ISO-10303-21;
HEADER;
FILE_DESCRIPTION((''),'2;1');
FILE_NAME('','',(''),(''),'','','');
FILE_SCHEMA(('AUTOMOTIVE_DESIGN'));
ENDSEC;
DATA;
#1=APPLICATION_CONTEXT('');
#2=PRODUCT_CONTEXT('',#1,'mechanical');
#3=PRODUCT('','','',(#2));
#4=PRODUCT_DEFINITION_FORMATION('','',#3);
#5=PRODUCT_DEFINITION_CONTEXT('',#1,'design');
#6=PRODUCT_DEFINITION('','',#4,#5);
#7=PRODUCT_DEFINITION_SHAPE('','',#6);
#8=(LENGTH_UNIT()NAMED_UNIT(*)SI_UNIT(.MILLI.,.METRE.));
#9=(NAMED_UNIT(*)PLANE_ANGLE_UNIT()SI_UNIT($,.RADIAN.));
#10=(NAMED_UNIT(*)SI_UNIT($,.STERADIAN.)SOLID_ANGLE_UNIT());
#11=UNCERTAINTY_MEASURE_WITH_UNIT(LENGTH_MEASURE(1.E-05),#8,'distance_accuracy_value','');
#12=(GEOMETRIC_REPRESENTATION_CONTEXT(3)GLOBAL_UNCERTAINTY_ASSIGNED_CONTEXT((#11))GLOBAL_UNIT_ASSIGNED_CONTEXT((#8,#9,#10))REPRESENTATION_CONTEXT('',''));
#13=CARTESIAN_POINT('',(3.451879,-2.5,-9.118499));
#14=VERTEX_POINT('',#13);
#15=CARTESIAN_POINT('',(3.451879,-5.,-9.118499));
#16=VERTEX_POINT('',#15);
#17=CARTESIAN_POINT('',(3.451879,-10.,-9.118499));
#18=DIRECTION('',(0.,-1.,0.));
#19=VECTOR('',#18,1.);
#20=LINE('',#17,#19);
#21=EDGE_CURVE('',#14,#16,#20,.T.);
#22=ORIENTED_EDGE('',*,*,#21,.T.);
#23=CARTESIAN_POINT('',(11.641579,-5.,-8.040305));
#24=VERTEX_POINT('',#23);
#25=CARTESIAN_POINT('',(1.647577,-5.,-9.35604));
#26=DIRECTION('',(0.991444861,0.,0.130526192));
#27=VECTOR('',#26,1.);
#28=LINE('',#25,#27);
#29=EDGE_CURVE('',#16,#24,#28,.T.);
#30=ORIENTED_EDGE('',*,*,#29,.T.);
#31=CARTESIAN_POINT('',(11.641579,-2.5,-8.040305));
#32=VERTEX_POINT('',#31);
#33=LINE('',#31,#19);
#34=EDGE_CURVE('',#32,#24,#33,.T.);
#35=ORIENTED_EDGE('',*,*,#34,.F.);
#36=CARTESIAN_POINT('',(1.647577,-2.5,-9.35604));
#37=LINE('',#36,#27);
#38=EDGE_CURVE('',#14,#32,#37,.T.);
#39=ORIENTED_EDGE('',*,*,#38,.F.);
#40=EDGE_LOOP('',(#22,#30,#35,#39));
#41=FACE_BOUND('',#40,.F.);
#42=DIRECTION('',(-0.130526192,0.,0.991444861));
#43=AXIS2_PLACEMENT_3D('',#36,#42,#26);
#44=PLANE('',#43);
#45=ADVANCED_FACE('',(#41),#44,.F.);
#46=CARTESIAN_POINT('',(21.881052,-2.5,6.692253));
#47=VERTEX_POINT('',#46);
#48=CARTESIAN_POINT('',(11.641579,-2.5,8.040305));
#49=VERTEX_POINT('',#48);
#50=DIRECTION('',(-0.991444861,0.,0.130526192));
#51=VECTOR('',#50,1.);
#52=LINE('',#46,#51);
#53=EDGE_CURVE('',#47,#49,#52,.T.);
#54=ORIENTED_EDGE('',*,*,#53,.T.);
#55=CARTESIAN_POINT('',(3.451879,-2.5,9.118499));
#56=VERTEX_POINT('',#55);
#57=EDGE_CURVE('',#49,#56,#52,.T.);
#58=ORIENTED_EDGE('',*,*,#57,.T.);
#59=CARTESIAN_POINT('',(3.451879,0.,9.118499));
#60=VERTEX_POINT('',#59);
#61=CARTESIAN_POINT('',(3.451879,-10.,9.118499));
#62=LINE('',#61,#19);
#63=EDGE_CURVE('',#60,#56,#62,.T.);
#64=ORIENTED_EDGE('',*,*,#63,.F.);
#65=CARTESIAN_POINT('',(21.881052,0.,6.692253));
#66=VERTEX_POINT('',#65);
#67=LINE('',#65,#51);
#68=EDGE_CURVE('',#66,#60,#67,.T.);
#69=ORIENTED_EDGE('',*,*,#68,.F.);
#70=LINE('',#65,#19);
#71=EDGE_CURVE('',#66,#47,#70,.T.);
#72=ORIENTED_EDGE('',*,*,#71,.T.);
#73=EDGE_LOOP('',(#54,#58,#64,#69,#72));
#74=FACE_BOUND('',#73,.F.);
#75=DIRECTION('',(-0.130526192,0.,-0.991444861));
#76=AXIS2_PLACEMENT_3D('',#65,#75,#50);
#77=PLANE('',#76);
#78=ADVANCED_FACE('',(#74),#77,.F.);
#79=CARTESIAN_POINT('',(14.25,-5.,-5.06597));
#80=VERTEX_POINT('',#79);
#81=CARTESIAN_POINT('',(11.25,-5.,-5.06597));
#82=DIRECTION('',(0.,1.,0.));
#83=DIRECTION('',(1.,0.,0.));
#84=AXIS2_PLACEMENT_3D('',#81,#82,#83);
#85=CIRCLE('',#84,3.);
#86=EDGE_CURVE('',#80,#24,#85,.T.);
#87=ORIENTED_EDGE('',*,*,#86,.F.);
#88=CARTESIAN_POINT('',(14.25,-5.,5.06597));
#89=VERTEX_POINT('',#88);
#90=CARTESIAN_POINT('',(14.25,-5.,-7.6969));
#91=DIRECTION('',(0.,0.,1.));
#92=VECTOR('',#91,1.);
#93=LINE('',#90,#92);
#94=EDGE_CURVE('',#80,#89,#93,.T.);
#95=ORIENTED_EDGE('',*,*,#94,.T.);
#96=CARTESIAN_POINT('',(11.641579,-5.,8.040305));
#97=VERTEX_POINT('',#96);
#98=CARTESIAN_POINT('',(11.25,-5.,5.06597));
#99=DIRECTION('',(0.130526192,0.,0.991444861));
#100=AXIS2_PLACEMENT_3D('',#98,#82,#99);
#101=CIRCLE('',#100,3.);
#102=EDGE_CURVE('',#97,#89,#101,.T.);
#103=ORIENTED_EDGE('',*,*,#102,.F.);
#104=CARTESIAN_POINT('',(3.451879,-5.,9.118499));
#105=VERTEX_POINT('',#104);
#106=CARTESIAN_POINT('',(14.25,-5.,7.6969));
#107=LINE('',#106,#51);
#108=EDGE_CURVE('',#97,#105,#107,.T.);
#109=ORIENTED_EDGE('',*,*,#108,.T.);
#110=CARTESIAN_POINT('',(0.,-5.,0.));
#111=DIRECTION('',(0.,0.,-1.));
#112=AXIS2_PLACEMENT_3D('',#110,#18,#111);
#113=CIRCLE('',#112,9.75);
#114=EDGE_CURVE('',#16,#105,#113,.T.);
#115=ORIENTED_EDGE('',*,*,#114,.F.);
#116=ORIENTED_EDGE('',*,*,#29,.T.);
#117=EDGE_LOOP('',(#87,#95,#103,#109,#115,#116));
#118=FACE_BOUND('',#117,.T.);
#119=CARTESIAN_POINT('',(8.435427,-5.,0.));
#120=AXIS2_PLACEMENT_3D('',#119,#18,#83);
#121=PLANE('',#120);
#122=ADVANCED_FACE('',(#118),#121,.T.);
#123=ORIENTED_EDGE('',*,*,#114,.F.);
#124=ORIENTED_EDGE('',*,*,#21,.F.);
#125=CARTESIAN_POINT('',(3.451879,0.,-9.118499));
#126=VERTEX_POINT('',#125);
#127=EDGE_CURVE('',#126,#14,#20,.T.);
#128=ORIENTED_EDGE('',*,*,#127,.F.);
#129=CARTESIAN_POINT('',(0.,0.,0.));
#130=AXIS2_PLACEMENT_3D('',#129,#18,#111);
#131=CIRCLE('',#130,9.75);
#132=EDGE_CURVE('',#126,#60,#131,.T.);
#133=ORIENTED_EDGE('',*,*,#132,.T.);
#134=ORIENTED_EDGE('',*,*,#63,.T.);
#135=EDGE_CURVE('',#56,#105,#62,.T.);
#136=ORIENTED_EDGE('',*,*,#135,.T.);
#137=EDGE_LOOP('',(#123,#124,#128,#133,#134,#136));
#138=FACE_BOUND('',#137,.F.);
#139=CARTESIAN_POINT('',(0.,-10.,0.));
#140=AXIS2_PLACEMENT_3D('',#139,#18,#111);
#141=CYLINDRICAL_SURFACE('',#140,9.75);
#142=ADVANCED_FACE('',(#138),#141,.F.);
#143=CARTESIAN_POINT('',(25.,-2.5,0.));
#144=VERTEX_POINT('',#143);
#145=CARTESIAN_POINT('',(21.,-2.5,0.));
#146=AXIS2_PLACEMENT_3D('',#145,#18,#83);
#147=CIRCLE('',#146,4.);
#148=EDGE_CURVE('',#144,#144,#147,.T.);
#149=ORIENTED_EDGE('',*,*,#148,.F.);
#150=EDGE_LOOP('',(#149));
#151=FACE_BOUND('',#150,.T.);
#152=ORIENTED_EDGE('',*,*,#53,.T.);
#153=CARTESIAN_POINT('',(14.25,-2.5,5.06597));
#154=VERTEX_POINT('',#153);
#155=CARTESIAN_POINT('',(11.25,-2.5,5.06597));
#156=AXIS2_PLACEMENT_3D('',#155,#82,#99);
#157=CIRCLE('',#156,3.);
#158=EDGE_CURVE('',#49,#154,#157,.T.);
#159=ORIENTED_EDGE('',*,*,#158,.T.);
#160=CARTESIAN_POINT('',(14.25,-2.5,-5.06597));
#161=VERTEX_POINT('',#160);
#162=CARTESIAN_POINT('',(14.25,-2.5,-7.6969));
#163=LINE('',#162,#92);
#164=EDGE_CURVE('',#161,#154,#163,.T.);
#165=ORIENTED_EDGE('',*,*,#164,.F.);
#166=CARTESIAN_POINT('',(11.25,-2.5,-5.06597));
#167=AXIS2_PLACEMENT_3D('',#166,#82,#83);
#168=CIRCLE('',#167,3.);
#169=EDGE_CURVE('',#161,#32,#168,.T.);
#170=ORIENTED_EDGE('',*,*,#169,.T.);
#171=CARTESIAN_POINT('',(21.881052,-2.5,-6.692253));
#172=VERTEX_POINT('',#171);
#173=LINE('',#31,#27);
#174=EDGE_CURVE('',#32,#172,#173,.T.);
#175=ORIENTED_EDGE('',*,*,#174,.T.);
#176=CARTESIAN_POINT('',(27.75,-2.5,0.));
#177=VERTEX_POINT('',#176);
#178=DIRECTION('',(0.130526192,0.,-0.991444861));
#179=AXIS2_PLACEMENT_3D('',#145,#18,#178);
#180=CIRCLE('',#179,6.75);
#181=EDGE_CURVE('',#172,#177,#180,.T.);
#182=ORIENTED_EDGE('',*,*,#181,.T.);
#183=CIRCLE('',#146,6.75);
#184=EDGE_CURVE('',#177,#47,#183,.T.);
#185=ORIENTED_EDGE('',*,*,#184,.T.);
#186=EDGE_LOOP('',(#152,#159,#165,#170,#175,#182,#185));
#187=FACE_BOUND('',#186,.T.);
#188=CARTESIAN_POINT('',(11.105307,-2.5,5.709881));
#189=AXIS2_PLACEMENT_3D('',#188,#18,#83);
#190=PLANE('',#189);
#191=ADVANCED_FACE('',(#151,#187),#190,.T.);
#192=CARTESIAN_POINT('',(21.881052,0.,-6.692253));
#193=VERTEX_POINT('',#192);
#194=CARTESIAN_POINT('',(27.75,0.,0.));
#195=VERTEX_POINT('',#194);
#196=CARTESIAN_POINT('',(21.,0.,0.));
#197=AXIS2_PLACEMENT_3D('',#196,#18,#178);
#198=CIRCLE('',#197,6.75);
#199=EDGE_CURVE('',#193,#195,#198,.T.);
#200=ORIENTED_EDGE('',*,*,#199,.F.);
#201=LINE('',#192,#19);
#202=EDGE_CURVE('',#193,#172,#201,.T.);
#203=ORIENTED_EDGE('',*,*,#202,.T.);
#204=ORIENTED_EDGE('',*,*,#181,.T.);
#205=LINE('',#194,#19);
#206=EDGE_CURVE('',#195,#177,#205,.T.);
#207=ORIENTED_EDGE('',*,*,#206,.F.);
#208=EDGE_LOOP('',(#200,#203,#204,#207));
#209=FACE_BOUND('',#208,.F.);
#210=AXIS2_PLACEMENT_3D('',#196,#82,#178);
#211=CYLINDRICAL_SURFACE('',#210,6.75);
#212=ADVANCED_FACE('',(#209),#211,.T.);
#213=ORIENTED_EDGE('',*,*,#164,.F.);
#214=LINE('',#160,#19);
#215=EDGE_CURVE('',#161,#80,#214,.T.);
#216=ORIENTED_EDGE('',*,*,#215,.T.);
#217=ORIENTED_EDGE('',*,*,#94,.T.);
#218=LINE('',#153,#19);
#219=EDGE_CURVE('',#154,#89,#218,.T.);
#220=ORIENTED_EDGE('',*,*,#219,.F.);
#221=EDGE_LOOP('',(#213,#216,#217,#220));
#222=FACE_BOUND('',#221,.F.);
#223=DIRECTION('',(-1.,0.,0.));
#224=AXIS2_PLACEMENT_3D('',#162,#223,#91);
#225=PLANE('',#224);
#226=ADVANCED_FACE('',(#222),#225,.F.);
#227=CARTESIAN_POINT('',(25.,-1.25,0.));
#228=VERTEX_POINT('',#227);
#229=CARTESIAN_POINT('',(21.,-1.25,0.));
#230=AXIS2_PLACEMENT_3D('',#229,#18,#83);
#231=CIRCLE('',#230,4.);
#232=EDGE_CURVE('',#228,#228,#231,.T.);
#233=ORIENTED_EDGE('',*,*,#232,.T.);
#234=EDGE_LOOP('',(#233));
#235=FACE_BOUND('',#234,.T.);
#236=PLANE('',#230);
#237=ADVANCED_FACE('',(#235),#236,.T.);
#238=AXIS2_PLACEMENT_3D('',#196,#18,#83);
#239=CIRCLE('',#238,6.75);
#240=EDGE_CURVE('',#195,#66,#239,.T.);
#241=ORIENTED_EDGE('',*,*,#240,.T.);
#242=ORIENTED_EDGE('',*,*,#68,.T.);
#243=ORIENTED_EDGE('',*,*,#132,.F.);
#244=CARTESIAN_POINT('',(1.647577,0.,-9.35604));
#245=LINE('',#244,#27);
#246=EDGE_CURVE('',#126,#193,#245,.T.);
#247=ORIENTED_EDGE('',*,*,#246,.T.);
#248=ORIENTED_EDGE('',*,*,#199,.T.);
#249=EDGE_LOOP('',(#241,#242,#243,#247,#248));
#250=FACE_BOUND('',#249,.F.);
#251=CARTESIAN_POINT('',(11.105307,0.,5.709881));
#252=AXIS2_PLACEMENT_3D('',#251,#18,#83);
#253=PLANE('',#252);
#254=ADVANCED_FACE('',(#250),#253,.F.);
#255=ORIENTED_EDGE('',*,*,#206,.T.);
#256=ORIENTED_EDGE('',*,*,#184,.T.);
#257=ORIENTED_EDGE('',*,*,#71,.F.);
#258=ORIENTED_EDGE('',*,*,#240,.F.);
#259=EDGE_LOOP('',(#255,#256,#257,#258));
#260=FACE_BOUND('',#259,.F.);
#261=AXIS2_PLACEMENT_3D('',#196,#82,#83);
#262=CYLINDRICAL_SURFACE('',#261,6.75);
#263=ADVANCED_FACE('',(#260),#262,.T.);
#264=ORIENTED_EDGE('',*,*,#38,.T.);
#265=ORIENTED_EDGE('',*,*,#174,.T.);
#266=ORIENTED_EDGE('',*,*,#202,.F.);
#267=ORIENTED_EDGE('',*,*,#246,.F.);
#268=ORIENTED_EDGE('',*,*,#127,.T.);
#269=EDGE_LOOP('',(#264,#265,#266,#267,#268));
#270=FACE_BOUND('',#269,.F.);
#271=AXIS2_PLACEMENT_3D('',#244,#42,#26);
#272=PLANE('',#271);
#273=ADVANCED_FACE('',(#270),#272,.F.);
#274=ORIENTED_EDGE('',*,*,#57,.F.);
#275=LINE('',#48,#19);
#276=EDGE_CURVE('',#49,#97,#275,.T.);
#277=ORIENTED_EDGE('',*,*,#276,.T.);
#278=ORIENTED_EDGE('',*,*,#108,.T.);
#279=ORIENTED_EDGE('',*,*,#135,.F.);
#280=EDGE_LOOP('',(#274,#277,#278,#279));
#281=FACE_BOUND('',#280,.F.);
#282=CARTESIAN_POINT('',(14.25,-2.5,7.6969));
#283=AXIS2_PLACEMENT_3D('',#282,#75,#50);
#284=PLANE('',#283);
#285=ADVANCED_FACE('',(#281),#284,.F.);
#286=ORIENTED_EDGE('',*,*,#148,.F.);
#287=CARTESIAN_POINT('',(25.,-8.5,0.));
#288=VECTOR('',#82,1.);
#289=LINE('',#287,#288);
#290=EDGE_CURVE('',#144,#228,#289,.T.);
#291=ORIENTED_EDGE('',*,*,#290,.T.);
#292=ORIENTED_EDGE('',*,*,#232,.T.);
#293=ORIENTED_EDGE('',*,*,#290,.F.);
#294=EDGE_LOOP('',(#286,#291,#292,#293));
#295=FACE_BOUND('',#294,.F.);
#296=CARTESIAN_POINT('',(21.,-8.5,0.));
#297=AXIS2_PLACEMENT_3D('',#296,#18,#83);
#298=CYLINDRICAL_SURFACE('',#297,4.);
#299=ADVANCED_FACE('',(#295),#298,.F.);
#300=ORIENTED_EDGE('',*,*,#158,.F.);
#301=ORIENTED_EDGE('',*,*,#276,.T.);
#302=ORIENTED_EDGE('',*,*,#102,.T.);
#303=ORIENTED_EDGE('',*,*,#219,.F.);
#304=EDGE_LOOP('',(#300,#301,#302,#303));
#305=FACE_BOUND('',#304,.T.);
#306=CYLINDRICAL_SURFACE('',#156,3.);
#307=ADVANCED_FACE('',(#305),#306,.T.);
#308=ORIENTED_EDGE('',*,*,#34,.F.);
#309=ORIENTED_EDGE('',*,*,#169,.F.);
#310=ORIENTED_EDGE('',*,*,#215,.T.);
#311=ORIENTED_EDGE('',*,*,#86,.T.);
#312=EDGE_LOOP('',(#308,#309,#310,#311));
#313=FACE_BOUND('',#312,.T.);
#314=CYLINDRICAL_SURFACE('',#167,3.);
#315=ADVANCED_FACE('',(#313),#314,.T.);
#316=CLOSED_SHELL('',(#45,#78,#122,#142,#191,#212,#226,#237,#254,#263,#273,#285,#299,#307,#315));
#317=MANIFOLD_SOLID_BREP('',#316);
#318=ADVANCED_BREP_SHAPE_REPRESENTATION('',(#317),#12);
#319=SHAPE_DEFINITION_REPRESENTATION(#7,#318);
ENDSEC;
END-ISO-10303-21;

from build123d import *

# Parameters (mm, degrees)
F0_R         = 8
F1_DEPTH     = 10
F2_R         = 1.5
F3_DEPTH     = 22.1
F4_R         = 1.4
F5_DEPTH     = 8
F6_T1_DEPTH  = 25.4217528018
F7_R         = 2
F8_R         = 2
F10_DEPTH    = 2.5
F11_R        = 4
F12_DEPTH    = 6
F14_DEPTH    = 2.5
F15_T1_DEPTH = 9.0773234724
F17_DEPTH    = 25
F18_DEPTH    = 7.25


# Not quite as in the source:
# - a fillet or chamfer that OpenCascade refuses, or shapes differently, is made with other operations: its cross-section is extruded or revolved along the edge and cut away or added


with BuildPart() as f1:
    # F0 (on Front) → F1 (new body)
    with BuildSketch(Plane.XZ):
        with BuildLine():
            ThreePointArc((-5.123475383, -8), (4.5594398703, -8.3343570879), (9.5, 0))
            ThreePointArc((9.5, 0), (2.5991730895, 9.1375215048), (-8.0777472107, 5))
            ThreePointArc((-8.0777472107, 5), (-8.4879541617, 4.2666888975), (-8.8317608663, 3.5))
            ThreePointArc((-8.8317608663, 3.5), (-9.0415515645, -2.9155351664), (-5.123475383, -8))
        make_face()
        Circle(F0_R, mode=Mode.SUBTRACT)
        with BuildLine():
            ThreePointArc((-8.8317608663, 3.5), (-8.4879541617, 4.2666888975), (-8.0777472107, 5))
            Line((-8.0777472107, 5), (-23.5, 5))
            ThreePointArc((-23.5, 5), (-24.7247448714, 4.5811388301), (-25.4364916731, 3.5))
            Line((-25.4364916731, 3.5), (-8.8317608663, 3.5))
        make_face()
        with BuildLine():
            Line((-23.5, -8), (-5.123475383, -8))
            ThreePointArc((-5.123475383, -8), (-9.0415515645, -2.9155351664), (-8.8317608663, 3.5))
            Line((-8.8317608663, 3.5), (-25.4364916731, 3.5))
            ThreePointArc((-25.4364916731, 3.5), (-25.4840593925, 3.252008585), (-25.5, 3))
            Line((-25.5, 3), (-25.5, 0))
            Line((-25.5, 0), (-25.5, -3.5))
            Line((-25.5, -3.5), (-25.5, -6))
            ThreePointArc((-25.5, -6), (-24.9142135624, -7.4142135624), (-23.5, -8))
        make_face()
        with BuildLine():
            ThreePointArc((-25.5, 3), (-25.4840593925, 3.252008585), (-25.4364916731, 3.5))
            Line((-25.4364916731, 3.5), (-25.5, 3.5))
            Line((-25.5, 3.5), (-31.5, 3.5))
            ThreePointArc((-31.5, 3.5), (-32.2071067812, 3.2071067812), (-32.5, 2.5))
            Line((-32.5, 2.5), (-32.5, 1.5))
            Line((-32.5, 1.5), (-32.5, 0))
            Line((-32.5, 0), (-32.5, -1.5))
            Line((-32.5, -1.5), (-32.5, -2.5))
            ThreePointArc((-32.5, -2.5), (-32.2071067812, -3.2071067812), (-31.5, -3.5))
            Line((-31.5, -3.5), (-25.5, -3.5))
            Line((-25.5, -3.5), (-25.5, 0))
            Line((-25.5, 0), (-25.5, 3))
        make_face()
    extrude(amount=F1_DEPTH)

    # F2 (on face) → F3 (cut)
    with BuildSketch(Plane(origin=(-32.5, 0, 0), x_dir=(0, -1, 0), z_dir=(-1, 0, 0))):
        with Locations((5, 0)):
            Circle(F2_R)
    extrude(amount=-F3_DEPTH, mode=Mode.SUBTRACT)

    # F4 (on face) → F5 (cut)
    with BuildSketch(Plane(origin=(0, 0, -8), x_dir=(1, 0, 0), z_dir=(0, 0, -1))):
        with Locations((-12.4, 5)):
            Circle(F4_R)
        with Locations((-19.5, 5)):
            Circle(F4_R)
    extrude(amount=-F5_DEPTH, mode=Mode.SUBTRACT)

    # F6: fillet of radius 2 on 2 edges, made by hand

    # F6_s2 → F6_t1 (cut)
    with BuildSketch(Plane.YZ.offset(-28.4997500063)):
        with BuildLine():
            ThreePointArc((-8.0001, 5.0001), (-9.4143135624, 4.4143135624), (-10.0001, 3.0001))
            Line((-10.0001, 3.0001), (-10.0401, 3.0001))
            ThreePointArc((-10.0401, 3.0001), (-10.04, 4.00005), (-10.04, 5))
            Line((-10.04, 5), (-10, 5.04))
            ThreePointArc((-10, 5.04), (-9.00005, 5.04), (-8.0001, 5.0401))
            Line((-8.0001, 5.0401), (-8.0001, 5.0001))
        make_face()
        with BuildLine():
            ThreePointArc((-1.9999, 5.0001), (-0.5856864376, 4.4143135624), (0.0001, 3.0001))
            Line((0.0001, 3.0001), (0.0401, 3.0001))
            ThreePointArc((0.0401, 3.0001), (0.04, 4.00005), (0.04, 5))
            Line((0.04, 5), (0, 5.04))
            ThreePointArc((0, 5.04), (-0.99995, 5.04), (-1.9999, 5.0401))
            Line((-1.9999, 5.0401), (-1.9999, 5.0001))
        make_face()
    extrude(amount=F6_T1_DEPTH, mode=Mode.SUBTRACT)

    # F7
    f7_edges = [f1.edges().sort_by_distance(p)[0] for p in [
        (-32.5, -10, 0),
        (-32.5, 0, 0),
    ]]
    fillet(f7_edges, radius=F7_R)

    # F8
    f8_edges = [f1.edges().sort_by_distance(p)[0] for p in [
        (-14.311738, -10, -8),
        (-14.311738, 0, -8),
    ]]
    fillet(f8_edges, radius=F8_R)

    # F9 (on Front) → F10 (join)
    with BuildSketch(Plane.XZ):
        with BuildLine():
            ThreePointArc((0.8300844627, 8.6718317984), (6.4467419184, 5.8591147448), (8.7114698505, 0))
            Line((8.7114698505, 0), (14.25, 0))
            ThreePointArc((14.25, 0), (16.5494157481, 5.0749187005), (21.8810517975, 6.6922528143))
            Line((21.8810517975, 6.6922528143), (1.6475767802, 9.3560403352))
            Line((1.6475767802, 9.3560403352), (0.8300844627, 9.4636652405))
            Line((0.8300844627, 9.4636652405), (0.8300844627, 8.6718317984))
        make_face()
        with BuildLine():
            Line((14.25, 0), (8.7114698505, 0))
            ThreePointArc((8.7114698505, 0), (6.4467419184, -5.8591147448), (0.8300844627, -8.6718317984))
            Line((0.8300844627, -8.6718317984), (0.8300844627, -9.4636652405))
            Line((0.8300844627, -9.4636652405), (1.6475767802, -9.3560403352))
            Line((1.6475767802, -9.3560403352), (21.8810517975, -6.6922528143))
            ThreePointArc((21.8810517975, -6.6922528143), (16.5494157481, -5.0749187005), (14.25, 0))
        make_face()
        with BuildLine():
            ThreePointArc((21.8810517975, 6.6922528143), (16.5494157481, 5.0749187005), (14.25, 0))
            Line((14.25, 0), (21, 0))
            Line((21, 0), (21.8810517975, -6.6922528143))
            ThreePointArc((21.8810517975, -6.6922528143), (26.0749187005, -4.4505842519), (27.75, 0))
            ThreePointArc((27.75, 0), (26.0749187005, 4.4505842519), (21.8810517975, 6.6922528143))
        make_face()
        with BuildLine():
            Line((21, 0), (14.25, 0))
            ThreePointArc((14.25, 0), (16.5494157481, -5.0749187005), (21.8810517975, -6.6922528143))
            Line((21.8810517975, -6.6922528143), (21, 0))
        make_face()
        with BuildLine():
            Line((1.6475767802, -9.3560403352), (0.8300844627, -9.4636652405))
            ThreePointArc((0.8300844627, -9.4636652405), (1.2399988261, -9.4187261831), (1.6475767802, -9.3560403352))
        make_face()
        with BuildLine():
            ThreePointArc((1.6475767802, 9.3560403352), (1.2399988261, 9.4187261831), (0.8300844627, 9.4636652405))
            Line((0.8300844627, 9.4636652405), (1.6475767802, 9.3560403352))
        make_face()
    extrude(amount=F10_DEPTH)

    # F11 (on face) → F12 (join)
    with BuildSketch(Plane.XZ.offset(2.5)):
        with Locations((21, 0)):
            Circle(F11_R)
    extrude(amount=F12_DEPTH)

    # F13 (on face) → F14 (join)
    with BuildSketch(Plane.XZ.offset(2.5)):
        with BuildLine():
            Line((14.25, -7.6968998426), (14.25, 0))
            Line((14.25, 0), (14.25, 7.6968998426))
            Line((14.25, 7.6968998426), (1.6475767802, 9.3560403352))
            Line((1.6475767802, 9.3560403352), (1.6475767802, 8.3387943225))
            ThreePointArc((1.6475767802, 8.3387943225), (8.5, 0), (1.6475767802, -8.3387943225))
            Line((1.6475767802, -8.3387943225), (1.6475767802, -9.3560403352))
            Line((1.6475767802, -9.3560403352), (14.25, -7.6968998426))
        make_face()
    extrude(amount=F14_DEPTH)

    # F15: fillet of radius 3 on 2 edges, made by hand

    # F15_s2 → F15_t1 (cut)
    with BuildSketch(Plane.XZ.offset(2.5)):
        with BuildLine():
            ThreePointArc((11.6415785767, 8.0403050378), (13.5055194224, 7.044007899), (14.25, 5.0659704537))
            Line((14.25, 5.0659704537), (14.25, 7.6968998426))
            Line((14.25, 7.6968998426), (11.6415785767, 8.0403050378))
        make_face()
        with BuildLine():
            ThreePointArc((14.25, -5.0659704537), (13.5055194224, -7.044007899), (11.6415785767, -8.0403050378))
            Line((11.6415785767, -8.0403050378), (14.25, -7.6968998426))
            Line((14.25, -7.6968998426), (14.25, -5.0659704537))
        make_face()
    extrude(amount=F15_T1_DEPTH, mode=Mode.SUBTRACT)

    # F16 (on face) → F17 (cut)
    with BuildSketch(Plane.XZ.offset(10)):
        with BuildLine():
            Line((-37.4530367553, -9.75), (0, -9.75))
            ThreePointArc((0, -9.75), (9.75, 0), (0, 9.75))
            Line((0, 9.75), (0, 13.4185552597))
            Line((0, 13.4185552597), (-34.6982963383, 13.4185552597))
            Line((-34.6982963383, 13.4185552597), (-37.4530367553, 13.4185552597))
            Line((-37.4530367553, 13.4185552597), (-37.4530367553, -9.75))
        make_face()
    extrude(amount=-F17_DEPTH, mode=Mode.SUBTRACT)

    # F18 (cut): a face of the model
    f18_faces = [f1.faces().sort_by_distance(p)[0] for p in [
        (21, -8.5, 0),
    ]]
    extrude(f18_faces, amount=-F18_DEPTH, mode=Mode.SUBTRACT)


solid = f1.part
